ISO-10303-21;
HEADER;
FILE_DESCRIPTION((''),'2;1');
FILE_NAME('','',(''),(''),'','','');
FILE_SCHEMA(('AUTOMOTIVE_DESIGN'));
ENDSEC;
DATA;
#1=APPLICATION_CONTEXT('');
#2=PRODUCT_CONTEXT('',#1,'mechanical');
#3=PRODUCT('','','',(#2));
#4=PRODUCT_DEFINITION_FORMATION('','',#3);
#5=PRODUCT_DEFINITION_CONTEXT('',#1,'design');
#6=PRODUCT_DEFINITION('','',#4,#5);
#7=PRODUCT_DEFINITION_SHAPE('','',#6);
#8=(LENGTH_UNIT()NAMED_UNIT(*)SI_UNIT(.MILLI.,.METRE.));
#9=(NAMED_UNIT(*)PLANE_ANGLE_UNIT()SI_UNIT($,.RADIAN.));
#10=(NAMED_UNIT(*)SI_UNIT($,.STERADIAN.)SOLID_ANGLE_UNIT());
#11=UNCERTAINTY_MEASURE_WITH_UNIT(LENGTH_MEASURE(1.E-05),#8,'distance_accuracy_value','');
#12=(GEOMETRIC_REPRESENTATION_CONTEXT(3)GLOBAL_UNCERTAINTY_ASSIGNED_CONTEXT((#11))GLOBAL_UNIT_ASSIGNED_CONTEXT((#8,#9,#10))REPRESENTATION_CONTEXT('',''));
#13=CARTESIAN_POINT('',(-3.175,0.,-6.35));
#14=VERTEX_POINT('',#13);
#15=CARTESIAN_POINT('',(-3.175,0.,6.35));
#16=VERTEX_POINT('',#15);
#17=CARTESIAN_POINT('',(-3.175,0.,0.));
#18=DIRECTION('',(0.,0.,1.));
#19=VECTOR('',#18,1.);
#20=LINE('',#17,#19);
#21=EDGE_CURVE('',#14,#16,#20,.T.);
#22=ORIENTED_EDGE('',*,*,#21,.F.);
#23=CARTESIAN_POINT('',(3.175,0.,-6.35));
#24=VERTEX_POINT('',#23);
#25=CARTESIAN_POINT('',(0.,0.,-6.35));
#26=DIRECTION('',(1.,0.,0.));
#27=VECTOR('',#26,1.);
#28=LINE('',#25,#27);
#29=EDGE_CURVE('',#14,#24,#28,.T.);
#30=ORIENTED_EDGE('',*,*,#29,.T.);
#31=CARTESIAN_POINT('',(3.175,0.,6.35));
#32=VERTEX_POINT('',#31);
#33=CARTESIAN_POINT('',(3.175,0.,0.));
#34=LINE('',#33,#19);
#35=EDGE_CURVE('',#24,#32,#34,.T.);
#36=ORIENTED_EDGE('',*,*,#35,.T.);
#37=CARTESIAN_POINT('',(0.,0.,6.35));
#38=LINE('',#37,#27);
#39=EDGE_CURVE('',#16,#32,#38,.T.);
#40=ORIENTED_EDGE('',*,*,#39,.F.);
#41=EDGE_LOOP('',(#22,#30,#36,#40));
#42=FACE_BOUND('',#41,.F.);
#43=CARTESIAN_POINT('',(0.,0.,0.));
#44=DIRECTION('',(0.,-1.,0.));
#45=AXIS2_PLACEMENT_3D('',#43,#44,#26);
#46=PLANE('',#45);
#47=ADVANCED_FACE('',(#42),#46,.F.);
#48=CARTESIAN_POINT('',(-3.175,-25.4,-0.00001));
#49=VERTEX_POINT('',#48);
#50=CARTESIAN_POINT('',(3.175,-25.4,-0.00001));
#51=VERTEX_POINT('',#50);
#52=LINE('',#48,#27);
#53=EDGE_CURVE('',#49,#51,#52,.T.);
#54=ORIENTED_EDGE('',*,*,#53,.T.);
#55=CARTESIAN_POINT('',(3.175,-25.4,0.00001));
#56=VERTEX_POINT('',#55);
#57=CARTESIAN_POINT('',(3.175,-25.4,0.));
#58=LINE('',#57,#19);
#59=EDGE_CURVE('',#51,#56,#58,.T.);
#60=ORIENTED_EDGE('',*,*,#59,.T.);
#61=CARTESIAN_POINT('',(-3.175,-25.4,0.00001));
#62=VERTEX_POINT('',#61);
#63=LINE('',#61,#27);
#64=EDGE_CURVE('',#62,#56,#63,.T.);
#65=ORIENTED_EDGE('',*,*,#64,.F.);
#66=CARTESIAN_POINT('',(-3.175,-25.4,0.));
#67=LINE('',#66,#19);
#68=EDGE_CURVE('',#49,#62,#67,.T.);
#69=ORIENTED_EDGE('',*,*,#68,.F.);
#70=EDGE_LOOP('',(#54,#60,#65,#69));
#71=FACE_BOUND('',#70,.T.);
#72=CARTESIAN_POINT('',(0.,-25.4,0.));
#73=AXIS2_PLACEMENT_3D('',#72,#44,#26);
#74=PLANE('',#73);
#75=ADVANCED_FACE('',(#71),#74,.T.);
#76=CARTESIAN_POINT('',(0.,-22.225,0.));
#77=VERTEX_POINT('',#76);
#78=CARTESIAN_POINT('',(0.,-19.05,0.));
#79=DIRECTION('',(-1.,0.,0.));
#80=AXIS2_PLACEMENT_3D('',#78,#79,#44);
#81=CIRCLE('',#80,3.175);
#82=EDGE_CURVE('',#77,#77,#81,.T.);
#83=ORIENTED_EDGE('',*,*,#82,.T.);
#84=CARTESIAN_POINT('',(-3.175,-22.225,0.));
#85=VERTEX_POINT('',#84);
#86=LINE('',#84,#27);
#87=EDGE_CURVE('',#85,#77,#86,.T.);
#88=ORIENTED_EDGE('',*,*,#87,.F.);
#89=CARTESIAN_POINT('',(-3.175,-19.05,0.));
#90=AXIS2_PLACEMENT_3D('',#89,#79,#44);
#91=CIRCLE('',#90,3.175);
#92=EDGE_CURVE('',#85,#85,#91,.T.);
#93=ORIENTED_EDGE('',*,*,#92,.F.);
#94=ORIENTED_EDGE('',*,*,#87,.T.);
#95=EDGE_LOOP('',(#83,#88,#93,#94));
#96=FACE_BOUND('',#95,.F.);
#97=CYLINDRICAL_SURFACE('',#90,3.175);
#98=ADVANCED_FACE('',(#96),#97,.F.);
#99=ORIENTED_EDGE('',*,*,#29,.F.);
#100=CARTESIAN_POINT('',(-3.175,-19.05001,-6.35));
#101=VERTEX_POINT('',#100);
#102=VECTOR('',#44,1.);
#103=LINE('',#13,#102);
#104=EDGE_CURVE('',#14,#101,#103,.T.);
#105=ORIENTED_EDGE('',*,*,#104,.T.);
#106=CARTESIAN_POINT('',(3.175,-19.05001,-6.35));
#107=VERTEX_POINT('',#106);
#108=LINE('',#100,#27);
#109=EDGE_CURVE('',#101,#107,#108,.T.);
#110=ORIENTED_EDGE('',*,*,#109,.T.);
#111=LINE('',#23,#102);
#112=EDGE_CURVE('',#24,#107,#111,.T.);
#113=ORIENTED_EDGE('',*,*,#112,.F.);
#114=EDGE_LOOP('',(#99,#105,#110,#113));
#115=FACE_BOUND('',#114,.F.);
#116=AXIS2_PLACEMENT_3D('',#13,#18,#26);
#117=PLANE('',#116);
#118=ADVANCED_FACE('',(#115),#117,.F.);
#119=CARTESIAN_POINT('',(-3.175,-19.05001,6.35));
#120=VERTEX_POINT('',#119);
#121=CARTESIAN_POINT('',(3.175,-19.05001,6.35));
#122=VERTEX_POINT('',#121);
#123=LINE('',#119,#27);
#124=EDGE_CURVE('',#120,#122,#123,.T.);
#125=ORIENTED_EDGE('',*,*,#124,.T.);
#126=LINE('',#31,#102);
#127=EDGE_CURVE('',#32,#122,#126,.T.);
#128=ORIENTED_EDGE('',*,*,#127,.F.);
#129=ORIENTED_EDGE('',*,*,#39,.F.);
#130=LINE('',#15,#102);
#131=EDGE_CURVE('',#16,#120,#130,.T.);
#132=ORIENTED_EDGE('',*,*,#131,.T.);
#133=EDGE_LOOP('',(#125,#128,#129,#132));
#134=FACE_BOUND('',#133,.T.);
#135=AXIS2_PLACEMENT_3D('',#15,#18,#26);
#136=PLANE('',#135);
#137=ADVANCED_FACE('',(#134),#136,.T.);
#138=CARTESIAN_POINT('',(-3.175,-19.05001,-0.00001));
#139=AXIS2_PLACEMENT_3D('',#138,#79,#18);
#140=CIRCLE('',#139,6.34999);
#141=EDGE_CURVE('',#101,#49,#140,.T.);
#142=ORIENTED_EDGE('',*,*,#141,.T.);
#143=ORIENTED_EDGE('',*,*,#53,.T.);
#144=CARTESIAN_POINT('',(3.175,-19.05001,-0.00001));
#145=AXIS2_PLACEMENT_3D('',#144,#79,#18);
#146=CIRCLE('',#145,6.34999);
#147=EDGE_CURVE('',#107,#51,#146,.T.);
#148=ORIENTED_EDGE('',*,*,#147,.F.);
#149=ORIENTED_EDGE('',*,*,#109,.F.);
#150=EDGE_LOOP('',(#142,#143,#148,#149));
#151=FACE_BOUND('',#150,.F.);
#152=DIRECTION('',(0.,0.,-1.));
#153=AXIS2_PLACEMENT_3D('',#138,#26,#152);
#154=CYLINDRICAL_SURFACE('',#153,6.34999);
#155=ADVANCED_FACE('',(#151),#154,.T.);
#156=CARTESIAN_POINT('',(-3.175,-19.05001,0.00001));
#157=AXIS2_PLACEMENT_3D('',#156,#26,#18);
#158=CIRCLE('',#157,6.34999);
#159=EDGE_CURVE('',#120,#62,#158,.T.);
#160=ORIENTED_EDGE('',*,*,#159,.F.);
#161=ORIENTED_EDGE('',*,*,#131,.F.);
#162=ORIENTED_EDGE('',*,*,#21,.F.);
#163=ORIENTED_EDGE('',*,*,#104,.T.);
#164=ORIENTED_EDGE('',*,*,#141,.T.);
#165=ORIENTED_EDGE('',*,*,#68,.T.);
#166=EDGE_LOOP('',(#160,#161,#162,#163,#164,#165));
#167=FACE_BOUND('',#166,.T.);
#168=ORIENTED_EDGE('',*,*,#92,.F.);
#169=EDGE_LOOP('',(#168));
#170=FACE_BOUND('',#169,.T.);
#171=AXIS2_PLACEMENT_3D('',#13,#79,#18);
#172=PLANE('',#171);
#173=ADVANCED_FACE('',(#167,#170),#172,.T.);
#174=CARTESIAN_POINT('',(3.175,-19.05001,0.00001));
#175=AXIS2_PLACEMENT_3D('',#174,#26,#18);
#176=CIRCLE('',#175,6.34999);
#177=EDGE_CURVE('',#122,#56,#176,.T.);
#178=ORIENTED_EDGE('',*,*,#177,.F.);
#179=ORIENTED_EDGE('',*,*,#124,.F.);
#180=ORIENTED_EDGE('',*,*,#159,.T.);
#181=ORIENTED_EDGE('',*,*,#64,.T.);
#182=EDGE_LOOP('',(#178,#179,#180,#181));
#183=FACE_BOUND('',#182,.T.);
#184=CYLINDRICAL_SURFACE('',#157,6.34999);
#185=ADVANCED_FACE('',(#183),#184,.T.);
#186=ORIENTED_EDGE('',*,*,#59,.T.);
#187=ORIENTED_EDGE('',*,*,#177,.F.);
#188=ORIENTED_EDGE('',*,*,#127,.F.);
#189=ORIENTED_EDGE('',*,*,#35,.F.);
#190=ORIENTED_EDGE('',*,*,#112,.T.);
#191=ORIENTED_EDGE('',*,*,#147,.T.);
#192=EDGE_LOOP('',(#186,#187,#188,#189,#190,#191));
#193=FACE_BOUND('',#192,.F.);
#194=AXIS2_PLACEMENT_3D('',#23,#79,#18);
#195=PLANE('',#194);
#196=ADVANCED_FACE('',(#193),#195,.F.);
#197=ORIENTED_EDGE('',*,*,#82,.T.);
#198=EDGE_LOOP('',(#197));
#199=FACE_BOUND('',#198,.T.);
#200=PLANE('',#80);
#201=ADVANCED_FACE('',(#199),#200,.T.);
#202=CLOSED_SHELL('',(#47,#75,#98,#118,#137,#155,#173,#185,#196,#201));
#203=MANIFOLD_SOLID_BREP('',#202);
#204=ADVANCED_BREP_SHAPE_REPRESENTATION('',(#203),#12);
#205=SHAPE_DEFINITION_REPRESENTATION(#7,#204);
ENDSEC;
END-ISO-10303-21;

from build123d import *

# Parameters (mm, degrees)
F0_W     = 6.35
F0_H     = 12.7
F1_DEPTH = 25.4
F2_R     = 6.34999
F3_R     = 3.175
F4_DEPTH = 3.175


# Not quite as in the source:
# - a fillet or chamfer is up to 0.001 mm smaller than in the source, because OpenCascade refuses the exact size


with BuildPart() as f1:
    # F0 (on Front) → F1 (new body)
    with BuildSketch(Plane.XZ):
        Rectangle(F0_W, F0_H)
    extrude(amount=F1_DEPTH)

    # F2 (radius 6.35 in the source; OpenCascade refuses exactly that, so slightly less here)
    f2_edges = [f1.edges().sort_by_distance(p)[0] for p in [
        (0, -25.4, 6.35),
        (0, -25.4, -6.35),
    ]]
    fillet(f2_edges, radius=F2_R)

    # F3 (on face) → F4 (cut)
    with BuildSketch(Plane(origin=(-3.175, 0, 0), x_dir=(0, -1, 0), z_dir=(-1, 0, 0))):
        with Locations((19.05, 0)):
            Circle(F3_R)
    extrude(amount=-F4_DEPTH, mode=Mode.SUBTRACT)


solid = f1.part
